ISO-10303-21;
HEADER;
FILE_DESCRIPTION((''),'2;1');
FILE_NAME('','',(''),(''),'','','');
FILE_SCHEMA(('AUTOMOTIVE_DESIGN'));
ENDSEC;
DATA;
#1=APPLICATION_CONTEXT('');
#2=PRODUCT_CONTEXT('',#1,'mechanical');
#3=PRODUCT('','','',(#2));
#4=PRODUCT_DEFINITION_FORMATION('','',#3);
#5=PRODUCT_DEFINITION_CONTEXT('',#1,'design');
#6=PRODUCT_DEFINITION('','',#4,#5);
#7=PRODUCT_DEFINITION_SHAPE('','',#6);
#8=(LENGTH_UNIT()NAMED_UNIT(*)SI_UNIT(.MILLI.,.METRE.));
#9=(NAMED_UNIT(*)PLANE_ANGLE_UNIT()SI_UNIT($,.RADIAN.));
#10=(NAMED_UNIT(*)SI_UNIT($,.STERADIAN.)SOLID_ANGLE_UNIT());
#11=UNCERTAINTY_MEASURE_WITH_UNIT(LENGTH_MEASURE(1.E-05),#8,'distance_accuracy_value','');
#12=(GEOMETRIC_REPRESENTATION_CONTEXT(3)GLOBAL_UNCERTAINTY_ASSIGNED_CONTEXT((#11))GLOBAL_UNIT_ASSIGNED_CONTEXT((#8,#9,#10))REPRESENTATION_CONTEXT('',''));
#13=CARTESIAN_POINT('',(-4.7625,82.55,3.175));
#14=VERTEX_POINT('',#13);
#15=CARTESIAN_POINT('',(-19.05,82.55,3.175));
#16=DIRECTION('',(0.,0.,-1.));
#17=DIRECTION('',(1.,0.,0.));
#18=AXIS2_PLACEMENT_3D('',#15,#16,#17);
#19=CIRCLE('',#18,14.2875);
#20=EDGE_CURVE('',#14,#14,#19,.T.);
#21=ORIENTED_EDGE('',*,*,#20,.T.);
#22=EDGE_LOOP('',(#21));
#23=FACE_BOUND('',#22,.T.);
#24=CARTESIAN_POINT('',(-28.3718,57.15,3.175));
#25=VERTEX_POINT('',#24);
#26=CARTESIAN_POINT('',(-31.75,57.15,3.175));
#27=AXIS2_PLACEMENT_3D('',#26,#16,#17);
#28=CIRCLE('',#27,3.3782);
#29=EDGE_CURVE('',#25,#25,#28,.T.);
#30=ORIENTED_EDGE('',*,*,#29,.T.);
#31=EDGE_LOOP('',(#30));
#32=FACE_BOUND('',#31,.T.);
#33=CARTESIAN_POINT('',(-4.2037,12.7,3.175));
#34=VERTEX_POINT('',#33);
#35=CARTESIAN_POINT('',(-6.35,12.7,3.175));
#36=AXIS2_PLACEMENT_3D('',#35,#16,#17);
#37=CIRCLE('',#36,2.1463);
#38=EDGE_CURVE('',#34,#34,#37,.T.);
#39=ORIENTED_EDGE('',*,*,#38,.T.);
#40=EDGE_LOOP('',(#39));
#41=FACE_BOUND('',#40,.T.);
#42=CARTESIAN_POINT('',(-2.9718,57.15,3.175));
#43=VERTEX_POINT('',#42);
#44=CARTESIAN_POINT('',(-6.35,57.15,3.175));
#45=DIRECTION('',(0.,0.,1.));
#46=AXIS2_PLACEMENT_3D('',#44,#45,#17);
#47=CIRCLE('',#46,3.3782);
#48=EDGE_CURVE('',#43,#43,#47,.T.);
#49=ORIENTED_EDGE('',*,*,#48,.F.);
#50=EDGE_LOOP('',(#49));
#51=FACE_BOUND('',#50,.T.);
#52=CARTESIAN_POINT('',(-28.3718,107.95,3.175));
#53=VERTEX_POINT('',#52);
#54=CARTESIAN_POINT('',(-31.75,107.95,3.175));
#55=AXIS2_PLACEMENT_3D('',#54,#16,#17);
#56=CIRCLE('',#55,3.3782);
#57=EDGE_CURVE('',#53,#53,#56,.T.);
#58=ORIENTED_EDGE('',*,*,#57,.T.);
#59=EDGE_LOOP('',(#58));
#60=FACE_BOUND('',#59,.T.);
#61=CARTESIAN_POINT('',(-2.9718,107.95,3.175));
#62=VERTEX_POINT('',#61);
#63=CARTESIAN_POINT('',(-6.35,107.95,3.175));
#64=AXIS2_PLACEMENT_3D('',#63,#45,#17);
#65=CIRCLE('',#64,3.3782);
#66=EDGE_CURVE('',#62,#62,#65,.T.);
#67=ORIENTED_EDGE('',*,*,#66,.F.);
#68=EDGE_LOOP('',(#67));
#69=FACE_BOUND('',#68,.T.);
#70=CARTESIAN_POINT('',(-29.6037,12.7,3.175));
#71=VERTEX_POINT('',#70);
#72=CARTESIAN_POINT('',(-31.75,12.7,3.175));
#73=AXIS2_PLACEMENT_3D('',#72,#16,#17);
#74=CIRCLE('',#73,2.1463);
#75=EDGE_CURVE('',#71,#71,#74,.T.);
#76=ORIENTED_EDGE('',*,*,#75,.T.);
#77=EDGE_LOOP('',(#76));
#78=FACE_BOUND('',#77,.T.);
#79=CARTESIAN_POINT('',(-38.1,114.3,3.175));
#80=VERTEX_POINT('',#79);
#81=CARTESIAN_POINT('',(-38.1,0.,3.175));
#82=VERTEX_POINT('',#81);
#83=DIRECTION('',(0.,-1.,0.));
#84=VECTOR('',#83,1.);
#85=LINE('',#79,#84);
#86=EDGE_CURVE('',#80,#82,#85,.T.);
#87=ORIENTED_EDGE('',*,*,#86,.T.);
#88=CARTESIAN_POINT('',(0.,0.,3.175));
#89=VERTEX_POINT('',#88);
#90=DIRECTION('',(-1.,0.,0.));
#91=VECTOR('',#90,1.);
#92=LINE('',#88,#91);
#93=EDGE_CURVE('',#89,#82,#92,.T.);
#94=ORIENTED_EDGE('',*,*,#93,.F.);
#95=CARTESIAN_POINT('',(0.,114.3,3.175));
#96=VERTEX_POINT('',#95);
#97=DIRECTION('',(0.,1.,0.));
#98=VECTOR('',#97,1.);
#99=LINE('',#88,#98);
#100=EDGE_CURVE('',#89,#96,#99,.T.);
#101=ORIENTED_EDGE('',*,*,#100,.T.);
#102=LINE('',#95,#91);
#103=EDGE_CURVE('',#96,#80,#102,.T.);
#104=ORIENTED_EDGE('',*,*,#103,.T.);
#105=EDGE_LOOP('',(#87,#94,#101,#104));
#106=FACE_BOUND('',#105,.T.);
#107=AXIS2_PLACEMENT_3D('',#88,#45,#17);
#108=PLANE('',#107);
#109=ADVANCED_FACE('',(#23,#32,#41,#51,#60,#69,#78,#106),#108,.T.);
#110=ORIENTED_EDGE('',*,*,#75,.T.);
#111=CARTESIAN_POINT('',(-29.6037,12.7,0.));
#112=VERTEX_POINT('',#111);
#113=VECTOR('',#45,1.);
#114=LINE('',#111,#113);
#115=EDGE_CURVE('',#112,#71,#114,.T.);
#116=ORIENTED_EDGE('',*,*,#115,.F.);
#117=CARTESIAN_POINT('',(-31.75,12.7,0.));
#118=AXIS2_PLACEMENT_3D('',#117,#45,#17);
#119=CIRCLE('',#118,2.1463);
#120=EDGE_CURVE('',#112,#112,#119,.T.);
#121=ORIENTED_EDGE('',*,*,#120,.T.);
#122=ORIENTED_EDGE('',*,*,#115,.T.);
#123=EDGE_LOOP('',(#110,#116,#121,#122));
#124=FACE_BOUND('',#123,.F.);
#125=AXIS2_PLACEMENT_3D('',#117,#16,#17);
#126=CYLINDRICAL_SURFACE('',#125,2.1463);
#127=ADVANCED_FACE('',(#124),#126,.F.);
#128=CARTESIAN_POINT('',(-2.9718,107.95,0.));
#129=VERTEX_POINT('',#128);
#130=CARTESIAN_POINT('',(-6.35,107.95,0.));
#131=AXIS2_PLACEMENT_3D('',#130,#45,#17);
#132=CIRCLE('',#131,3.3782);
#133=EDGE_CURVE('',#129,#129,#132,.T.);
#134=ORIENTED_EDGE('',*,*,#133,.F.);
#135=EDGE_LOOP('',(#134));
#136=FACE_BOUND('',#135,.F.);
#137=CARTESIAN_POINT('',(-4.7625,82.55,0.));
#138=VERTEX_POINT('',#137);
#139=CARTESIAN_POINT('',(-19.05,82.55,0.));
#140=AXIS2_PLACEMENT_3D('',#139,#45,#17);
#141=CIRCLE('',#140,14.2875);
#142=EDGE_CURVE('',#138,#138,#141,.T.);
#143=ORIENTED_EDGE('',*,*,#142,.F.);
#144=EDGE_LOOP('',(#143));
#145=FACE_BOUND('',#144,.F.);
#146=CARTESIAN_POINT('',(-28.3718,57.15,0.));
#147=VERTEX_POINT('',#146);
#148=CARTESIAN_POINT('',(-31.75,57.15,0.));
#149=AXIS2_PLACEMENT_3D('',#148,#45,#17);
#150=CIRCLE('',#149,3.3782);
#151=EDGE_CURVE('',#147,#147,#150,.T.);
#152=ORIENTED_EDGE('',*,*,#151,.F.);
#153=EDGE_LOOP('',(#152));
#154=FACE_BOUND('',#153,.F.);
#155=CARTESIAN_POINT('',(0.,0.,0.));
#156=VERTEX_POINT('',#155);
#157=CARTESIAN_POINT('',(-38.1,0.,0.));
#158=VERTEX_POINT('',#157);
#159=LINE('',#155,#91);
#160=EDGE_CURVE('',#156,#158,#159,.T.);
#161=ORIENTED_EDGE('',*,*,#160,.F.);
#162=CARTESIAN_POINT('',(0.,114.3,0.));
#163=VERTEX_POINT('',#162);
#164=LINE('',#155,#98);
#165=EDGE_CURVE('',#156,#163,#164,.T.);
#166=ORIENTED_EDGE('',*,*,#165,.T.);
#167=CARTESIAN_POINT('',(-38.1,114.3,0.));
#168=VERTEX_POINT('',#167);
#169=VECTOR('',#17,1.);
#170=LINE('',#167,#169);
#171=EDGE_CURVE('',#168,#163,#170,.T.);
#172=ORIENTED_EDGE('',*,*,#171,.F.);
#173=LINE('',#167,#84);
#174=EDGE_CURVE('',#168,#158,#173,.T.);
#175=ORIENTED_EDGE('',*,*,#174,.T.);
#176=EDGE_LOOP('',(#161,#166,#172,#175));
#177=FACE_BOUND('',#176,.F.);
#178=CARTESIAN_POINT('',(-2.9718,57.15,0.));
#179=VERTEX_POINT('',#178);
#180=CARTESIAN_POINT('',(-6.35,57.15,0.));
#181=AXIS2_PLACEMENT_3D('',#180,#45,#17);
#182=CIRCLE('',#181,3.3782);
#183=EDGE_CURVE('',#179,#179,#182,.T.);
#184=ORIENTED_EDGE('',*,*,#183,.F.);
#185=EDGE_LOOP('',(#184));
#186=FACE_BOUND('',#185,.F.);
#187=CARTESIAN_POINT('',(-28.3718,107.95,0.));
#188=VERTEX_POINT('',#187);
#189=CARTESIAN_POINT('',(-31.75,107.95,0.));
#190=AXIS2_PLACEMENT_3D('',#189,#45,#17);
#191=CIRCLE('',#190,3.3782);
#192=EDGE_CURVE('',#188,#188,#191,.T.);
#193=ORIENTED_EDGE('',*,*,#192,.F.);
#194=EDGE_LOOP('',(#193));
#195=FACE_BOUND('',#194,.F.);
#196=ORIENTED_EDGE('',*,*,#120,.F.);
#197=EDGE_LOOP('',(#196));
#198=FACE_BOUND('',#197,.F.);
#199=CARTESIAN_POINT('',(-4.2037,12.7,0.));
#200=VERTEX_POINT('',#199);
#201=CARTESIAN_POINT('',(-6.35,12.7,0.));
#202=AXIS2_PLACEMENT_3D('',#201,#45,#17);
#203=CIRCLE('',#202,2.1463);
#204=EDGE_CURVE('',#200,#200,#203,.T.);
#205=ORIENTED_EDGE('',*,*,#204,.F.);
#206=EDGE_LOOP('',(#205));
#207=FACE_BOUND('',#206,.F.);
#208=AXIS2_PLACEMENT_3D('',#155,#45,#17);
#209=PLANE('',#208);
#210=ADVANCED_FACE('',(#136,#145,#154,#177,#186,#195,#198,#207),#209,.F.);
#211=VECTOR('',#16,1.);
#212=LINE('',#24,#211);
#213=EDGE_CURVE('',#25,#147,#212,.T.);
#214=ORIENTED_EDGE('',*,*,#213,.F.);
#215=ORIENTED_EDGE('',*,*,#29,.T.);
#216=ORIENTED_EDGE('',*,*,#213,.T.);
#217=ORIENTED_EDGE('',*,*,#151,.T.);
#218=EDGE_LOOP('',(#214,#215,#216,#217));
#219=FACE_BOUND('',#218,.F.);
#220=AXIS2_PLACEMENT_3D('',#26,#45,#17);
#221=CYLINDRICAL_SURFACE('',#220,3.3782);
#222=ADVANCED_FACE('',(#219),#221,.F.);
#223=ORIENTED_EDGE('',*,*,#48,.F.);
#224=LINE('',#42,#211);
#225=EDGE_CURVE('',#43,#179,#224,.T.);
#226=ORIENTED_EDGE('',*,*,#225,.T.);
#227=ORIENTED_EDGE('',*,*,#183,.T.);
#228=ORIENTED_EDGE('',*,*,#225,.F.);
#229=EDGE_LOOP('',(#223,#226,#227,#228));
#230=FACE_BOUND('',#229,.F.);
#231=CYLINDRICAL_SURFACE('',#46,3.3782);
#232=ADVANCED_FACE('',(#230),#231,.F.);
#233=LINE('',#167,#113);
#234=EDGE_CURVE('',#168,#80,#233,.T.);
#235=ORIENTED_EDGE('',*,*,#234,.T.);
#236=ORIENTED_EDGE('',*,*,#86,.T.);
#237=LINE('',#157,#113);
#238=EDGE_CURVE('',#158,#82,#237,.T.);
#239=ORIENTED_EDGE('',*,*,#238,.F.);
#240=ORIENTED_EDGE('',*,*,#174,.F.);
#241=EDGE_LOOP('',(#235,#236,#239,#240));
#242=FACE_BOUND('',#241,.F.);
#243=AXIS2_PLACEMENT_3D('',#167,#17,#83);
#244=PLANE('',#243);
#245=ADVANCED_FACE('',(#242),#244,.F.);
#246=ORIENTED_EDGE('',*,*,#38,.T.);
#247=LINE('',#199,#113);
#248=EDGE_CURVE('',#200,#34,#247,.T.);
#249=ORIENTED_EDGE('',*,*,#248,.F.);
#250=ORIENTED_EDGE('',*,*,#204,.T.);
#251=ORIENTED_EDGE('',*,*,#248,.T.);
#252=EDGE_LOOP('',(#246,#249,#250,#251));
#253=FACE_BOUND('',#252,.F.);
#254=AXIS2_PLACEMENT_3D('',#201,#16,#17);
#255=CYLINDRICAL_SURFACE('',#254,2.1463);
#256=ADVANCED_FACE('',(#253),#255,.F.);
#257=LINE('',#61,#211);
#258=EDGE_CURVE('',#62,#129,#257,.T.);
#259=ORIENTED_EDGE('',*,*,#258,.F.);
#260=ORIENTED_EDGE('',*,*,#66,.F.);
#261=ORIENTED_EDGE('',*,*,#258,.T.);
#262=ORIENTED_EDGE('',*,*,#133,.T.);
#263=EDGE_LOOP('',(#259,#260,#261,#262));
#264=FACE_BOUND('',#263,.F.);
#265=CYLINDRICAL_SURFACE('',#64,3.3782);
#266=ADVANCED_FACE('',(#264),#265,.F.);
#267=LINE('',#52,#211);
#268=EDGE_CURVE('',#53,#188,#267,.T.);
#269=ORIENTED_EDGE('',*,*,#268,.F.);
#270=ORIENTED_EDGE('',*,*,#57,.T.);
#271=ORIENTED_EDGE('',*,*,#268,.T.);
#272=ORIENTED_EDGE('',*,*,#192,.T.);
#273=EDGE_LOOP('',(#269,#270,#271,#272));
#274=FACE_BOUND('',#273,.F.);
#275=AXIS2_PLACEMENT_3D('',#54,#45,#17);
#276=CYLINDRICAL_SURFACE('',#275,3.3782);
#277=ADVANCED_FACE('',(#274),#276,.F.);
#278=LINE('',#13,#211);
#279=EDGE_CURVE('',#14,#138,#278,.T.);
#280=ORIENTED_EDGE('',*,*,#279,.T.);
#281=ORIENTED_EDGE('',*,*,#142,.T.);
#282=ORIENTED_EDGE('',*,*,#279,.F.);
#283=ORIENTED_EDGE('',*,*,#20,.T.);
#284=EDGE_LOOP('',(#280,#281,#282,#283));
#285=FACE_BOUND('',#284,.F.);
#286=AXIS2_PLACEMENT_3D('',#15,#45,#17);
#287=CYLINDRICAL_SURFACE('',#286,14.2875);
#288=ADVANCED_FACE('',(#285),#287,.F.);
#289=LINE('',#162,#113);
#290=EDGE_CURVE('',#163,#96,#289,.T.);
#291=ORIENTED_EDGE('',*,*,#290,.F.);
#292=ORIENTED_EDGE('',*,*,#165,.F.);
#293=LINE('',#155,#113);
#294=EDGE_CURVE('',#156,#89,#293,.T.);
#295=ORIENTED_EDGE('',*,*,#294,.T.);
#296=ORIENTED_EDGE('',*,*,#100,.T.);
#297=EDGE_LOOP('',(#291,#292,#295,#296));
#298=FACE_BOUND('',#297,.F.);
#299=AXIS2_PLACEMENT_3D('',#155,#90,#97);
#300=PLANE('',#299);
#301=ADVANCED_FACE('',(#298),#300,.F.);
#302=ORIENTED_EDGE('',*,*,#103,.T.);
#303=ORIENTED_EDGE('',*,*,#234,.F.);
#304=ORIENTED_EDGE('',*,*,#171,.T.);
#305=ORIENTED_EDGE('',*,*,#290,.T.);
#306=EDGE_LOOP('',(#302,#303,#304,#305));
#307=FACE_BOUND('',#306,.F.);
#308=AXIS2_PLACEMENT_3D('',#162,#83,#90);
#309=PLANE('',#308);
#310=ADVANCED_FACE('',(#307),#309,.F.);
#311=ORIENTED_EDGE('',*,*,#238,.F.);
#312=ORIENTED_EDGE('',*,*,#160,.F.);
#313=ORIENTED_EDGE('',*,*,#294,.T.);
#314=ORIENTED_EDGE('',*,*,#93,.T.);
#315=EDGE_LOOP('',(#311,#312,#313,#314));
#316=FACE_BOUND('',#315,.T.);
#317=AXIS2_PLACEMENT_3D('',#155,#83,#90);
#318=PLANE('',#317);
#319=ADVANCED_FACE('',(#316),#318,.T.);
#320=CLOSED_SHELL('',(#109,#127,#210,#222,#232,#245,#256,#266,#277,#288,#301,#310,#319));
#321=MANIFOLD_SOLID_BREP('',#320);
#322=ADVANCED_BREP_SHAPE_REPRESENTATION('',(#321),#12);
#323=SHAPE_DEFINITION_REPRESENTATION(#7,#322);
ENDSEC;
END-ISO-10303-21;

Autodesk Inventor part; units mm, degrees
ref_plane "YZ Plane" through (0, 0, 0) normal (1, 0, 0) x (0, 1, 0)
ref_plane "XZ Plane" through (0, 0, 0) normal (0, 1, 0) x (-1, 0, 0)
ref_plane "XY Plane" through (0, 0, 0) normal (0, 0, 1) x (1, 0, 0)
sketch "Sketch1" plane through (0, 0, 0) normal (0, 0, 1) x (1, 0, 0)
  line L0 (0, 0) -> (-38.1, 0)
  line L1 (0, 0) -> (0, 114.3)
  line L2 (0, 114.3) -> (-38.1, 114.3)
  line L3 (-38.1, 114.3) -> (-38.1, 0)
  line L4 (-38.1, 114.3) -> (-31.75, 114.3)
  line L5 (-31.75, 114.3) -> (-31.75, 12.7)
  line L6 (0, 114.3) -> (-6.35, 114.3)
  line L7 (-6.35, 114.3) -> (-6.35, 12.7)
  circle A0 centre (-31.75, 12.7) radius 2.1463
  circle A1 centre (-6.35, 12.7) radius 2.1463
  dimension "d0" = 38.1
  dimension "d1" = 114.3
  dimension "d2" = 6.35
  dimension "d3" = 101.6
  dimension "d4" = 6.35
  dimension "d5" = 4.2926
  dimension "d6" = 4.2926
  dimension "d7" = 101.6
extrude "Plate1" add sketch "Sketch1" along normal blind 3.175
sketch "Sketch3" plane through (0, 0, 3.175) normal (0, 0, 1) x (1, 0, 0)
  line L0 (0, 114.3) -> (0, 0) projected
  line L1 (-38.1, 114.3) -> (0, 114.3) projected
  line L2 (-38.1, 0) -> (-38.1, 114.3) projected
  line L3 (-38.1, 114.3) -> (-38.1, 107.95)
  line L4 (-38.1, 107.95) -> (-31.75, 107.95)
  circle A0 centre (-31.75, 107.95) radius 3.3782
  line L5 (0, 114.3) -> (0, 107.95)
  line L6 (0, 107.95) -> (-6.35, 107.95)
  circle A1 centre (-6.35, 107.95) radius 3.3782
  line L7 (-38.1, 107.95) -> (-38.1, 57.15)
  line L8 (-38.1, 57.15) -> (-31.75, 57.15)
  line L9 (0, 57.15) -> (-6.35, 57.15)
  circle A2 centre (-31.75, 57.15) radius 3.3782
  circle A3 centre (-6.35, 57.15) radius 3.3782
  line L10 (-38.1, 114.3) -> (-38.1, 82.55)
  line L11 (-38.1, 82.55) -> (-19.05, 82.55)
  circle A4 centre (-19.05, 82.55) radius 14.2875
  dimension "d19" = 6.35
  dimension "d20" = 6.35
  dimension "d21" = 6.7564
  dimension "d22" = 6.35
  dimension "d23" = 6.35
  dimension "d24" = 6.7564
  dimension "d25" = 50.8
  dimension "d26" = 6.35
  dimension "d27" = 6.35
  dimension "d28" = 57.15
  dimension "d29" = 6.7564
  dimension "d30" = 6.7564
  dimension "d31" = 31.75
  dimension "d32" = 28.575
extrude "Cut1" cut sketch "Sketch3" against normal blind 3.175
equation "\"d33\" = Thickness"
equation "\"BendRadius\" = Thickness"
equation "\"BendReliefWidth\" = Thickness"
equation "\"BendReliefDepth\" = 0.5 * Thickness"
equation "\"CornerReliefSize\" = 4 * Thickness"
equation "\"MinimumRemnant\" = 2 * Thickness"
equation "\"TransitionRadius\" = BendRadius"
equation "\"JacobiRadiusSize\" = BendRadius"
equation "\"GapSize\" = Thickness"
equation "\"d8\" = BendRadius"
equation "\"Thickness\" = 3.175"
properties part number "upper pulley mount"
